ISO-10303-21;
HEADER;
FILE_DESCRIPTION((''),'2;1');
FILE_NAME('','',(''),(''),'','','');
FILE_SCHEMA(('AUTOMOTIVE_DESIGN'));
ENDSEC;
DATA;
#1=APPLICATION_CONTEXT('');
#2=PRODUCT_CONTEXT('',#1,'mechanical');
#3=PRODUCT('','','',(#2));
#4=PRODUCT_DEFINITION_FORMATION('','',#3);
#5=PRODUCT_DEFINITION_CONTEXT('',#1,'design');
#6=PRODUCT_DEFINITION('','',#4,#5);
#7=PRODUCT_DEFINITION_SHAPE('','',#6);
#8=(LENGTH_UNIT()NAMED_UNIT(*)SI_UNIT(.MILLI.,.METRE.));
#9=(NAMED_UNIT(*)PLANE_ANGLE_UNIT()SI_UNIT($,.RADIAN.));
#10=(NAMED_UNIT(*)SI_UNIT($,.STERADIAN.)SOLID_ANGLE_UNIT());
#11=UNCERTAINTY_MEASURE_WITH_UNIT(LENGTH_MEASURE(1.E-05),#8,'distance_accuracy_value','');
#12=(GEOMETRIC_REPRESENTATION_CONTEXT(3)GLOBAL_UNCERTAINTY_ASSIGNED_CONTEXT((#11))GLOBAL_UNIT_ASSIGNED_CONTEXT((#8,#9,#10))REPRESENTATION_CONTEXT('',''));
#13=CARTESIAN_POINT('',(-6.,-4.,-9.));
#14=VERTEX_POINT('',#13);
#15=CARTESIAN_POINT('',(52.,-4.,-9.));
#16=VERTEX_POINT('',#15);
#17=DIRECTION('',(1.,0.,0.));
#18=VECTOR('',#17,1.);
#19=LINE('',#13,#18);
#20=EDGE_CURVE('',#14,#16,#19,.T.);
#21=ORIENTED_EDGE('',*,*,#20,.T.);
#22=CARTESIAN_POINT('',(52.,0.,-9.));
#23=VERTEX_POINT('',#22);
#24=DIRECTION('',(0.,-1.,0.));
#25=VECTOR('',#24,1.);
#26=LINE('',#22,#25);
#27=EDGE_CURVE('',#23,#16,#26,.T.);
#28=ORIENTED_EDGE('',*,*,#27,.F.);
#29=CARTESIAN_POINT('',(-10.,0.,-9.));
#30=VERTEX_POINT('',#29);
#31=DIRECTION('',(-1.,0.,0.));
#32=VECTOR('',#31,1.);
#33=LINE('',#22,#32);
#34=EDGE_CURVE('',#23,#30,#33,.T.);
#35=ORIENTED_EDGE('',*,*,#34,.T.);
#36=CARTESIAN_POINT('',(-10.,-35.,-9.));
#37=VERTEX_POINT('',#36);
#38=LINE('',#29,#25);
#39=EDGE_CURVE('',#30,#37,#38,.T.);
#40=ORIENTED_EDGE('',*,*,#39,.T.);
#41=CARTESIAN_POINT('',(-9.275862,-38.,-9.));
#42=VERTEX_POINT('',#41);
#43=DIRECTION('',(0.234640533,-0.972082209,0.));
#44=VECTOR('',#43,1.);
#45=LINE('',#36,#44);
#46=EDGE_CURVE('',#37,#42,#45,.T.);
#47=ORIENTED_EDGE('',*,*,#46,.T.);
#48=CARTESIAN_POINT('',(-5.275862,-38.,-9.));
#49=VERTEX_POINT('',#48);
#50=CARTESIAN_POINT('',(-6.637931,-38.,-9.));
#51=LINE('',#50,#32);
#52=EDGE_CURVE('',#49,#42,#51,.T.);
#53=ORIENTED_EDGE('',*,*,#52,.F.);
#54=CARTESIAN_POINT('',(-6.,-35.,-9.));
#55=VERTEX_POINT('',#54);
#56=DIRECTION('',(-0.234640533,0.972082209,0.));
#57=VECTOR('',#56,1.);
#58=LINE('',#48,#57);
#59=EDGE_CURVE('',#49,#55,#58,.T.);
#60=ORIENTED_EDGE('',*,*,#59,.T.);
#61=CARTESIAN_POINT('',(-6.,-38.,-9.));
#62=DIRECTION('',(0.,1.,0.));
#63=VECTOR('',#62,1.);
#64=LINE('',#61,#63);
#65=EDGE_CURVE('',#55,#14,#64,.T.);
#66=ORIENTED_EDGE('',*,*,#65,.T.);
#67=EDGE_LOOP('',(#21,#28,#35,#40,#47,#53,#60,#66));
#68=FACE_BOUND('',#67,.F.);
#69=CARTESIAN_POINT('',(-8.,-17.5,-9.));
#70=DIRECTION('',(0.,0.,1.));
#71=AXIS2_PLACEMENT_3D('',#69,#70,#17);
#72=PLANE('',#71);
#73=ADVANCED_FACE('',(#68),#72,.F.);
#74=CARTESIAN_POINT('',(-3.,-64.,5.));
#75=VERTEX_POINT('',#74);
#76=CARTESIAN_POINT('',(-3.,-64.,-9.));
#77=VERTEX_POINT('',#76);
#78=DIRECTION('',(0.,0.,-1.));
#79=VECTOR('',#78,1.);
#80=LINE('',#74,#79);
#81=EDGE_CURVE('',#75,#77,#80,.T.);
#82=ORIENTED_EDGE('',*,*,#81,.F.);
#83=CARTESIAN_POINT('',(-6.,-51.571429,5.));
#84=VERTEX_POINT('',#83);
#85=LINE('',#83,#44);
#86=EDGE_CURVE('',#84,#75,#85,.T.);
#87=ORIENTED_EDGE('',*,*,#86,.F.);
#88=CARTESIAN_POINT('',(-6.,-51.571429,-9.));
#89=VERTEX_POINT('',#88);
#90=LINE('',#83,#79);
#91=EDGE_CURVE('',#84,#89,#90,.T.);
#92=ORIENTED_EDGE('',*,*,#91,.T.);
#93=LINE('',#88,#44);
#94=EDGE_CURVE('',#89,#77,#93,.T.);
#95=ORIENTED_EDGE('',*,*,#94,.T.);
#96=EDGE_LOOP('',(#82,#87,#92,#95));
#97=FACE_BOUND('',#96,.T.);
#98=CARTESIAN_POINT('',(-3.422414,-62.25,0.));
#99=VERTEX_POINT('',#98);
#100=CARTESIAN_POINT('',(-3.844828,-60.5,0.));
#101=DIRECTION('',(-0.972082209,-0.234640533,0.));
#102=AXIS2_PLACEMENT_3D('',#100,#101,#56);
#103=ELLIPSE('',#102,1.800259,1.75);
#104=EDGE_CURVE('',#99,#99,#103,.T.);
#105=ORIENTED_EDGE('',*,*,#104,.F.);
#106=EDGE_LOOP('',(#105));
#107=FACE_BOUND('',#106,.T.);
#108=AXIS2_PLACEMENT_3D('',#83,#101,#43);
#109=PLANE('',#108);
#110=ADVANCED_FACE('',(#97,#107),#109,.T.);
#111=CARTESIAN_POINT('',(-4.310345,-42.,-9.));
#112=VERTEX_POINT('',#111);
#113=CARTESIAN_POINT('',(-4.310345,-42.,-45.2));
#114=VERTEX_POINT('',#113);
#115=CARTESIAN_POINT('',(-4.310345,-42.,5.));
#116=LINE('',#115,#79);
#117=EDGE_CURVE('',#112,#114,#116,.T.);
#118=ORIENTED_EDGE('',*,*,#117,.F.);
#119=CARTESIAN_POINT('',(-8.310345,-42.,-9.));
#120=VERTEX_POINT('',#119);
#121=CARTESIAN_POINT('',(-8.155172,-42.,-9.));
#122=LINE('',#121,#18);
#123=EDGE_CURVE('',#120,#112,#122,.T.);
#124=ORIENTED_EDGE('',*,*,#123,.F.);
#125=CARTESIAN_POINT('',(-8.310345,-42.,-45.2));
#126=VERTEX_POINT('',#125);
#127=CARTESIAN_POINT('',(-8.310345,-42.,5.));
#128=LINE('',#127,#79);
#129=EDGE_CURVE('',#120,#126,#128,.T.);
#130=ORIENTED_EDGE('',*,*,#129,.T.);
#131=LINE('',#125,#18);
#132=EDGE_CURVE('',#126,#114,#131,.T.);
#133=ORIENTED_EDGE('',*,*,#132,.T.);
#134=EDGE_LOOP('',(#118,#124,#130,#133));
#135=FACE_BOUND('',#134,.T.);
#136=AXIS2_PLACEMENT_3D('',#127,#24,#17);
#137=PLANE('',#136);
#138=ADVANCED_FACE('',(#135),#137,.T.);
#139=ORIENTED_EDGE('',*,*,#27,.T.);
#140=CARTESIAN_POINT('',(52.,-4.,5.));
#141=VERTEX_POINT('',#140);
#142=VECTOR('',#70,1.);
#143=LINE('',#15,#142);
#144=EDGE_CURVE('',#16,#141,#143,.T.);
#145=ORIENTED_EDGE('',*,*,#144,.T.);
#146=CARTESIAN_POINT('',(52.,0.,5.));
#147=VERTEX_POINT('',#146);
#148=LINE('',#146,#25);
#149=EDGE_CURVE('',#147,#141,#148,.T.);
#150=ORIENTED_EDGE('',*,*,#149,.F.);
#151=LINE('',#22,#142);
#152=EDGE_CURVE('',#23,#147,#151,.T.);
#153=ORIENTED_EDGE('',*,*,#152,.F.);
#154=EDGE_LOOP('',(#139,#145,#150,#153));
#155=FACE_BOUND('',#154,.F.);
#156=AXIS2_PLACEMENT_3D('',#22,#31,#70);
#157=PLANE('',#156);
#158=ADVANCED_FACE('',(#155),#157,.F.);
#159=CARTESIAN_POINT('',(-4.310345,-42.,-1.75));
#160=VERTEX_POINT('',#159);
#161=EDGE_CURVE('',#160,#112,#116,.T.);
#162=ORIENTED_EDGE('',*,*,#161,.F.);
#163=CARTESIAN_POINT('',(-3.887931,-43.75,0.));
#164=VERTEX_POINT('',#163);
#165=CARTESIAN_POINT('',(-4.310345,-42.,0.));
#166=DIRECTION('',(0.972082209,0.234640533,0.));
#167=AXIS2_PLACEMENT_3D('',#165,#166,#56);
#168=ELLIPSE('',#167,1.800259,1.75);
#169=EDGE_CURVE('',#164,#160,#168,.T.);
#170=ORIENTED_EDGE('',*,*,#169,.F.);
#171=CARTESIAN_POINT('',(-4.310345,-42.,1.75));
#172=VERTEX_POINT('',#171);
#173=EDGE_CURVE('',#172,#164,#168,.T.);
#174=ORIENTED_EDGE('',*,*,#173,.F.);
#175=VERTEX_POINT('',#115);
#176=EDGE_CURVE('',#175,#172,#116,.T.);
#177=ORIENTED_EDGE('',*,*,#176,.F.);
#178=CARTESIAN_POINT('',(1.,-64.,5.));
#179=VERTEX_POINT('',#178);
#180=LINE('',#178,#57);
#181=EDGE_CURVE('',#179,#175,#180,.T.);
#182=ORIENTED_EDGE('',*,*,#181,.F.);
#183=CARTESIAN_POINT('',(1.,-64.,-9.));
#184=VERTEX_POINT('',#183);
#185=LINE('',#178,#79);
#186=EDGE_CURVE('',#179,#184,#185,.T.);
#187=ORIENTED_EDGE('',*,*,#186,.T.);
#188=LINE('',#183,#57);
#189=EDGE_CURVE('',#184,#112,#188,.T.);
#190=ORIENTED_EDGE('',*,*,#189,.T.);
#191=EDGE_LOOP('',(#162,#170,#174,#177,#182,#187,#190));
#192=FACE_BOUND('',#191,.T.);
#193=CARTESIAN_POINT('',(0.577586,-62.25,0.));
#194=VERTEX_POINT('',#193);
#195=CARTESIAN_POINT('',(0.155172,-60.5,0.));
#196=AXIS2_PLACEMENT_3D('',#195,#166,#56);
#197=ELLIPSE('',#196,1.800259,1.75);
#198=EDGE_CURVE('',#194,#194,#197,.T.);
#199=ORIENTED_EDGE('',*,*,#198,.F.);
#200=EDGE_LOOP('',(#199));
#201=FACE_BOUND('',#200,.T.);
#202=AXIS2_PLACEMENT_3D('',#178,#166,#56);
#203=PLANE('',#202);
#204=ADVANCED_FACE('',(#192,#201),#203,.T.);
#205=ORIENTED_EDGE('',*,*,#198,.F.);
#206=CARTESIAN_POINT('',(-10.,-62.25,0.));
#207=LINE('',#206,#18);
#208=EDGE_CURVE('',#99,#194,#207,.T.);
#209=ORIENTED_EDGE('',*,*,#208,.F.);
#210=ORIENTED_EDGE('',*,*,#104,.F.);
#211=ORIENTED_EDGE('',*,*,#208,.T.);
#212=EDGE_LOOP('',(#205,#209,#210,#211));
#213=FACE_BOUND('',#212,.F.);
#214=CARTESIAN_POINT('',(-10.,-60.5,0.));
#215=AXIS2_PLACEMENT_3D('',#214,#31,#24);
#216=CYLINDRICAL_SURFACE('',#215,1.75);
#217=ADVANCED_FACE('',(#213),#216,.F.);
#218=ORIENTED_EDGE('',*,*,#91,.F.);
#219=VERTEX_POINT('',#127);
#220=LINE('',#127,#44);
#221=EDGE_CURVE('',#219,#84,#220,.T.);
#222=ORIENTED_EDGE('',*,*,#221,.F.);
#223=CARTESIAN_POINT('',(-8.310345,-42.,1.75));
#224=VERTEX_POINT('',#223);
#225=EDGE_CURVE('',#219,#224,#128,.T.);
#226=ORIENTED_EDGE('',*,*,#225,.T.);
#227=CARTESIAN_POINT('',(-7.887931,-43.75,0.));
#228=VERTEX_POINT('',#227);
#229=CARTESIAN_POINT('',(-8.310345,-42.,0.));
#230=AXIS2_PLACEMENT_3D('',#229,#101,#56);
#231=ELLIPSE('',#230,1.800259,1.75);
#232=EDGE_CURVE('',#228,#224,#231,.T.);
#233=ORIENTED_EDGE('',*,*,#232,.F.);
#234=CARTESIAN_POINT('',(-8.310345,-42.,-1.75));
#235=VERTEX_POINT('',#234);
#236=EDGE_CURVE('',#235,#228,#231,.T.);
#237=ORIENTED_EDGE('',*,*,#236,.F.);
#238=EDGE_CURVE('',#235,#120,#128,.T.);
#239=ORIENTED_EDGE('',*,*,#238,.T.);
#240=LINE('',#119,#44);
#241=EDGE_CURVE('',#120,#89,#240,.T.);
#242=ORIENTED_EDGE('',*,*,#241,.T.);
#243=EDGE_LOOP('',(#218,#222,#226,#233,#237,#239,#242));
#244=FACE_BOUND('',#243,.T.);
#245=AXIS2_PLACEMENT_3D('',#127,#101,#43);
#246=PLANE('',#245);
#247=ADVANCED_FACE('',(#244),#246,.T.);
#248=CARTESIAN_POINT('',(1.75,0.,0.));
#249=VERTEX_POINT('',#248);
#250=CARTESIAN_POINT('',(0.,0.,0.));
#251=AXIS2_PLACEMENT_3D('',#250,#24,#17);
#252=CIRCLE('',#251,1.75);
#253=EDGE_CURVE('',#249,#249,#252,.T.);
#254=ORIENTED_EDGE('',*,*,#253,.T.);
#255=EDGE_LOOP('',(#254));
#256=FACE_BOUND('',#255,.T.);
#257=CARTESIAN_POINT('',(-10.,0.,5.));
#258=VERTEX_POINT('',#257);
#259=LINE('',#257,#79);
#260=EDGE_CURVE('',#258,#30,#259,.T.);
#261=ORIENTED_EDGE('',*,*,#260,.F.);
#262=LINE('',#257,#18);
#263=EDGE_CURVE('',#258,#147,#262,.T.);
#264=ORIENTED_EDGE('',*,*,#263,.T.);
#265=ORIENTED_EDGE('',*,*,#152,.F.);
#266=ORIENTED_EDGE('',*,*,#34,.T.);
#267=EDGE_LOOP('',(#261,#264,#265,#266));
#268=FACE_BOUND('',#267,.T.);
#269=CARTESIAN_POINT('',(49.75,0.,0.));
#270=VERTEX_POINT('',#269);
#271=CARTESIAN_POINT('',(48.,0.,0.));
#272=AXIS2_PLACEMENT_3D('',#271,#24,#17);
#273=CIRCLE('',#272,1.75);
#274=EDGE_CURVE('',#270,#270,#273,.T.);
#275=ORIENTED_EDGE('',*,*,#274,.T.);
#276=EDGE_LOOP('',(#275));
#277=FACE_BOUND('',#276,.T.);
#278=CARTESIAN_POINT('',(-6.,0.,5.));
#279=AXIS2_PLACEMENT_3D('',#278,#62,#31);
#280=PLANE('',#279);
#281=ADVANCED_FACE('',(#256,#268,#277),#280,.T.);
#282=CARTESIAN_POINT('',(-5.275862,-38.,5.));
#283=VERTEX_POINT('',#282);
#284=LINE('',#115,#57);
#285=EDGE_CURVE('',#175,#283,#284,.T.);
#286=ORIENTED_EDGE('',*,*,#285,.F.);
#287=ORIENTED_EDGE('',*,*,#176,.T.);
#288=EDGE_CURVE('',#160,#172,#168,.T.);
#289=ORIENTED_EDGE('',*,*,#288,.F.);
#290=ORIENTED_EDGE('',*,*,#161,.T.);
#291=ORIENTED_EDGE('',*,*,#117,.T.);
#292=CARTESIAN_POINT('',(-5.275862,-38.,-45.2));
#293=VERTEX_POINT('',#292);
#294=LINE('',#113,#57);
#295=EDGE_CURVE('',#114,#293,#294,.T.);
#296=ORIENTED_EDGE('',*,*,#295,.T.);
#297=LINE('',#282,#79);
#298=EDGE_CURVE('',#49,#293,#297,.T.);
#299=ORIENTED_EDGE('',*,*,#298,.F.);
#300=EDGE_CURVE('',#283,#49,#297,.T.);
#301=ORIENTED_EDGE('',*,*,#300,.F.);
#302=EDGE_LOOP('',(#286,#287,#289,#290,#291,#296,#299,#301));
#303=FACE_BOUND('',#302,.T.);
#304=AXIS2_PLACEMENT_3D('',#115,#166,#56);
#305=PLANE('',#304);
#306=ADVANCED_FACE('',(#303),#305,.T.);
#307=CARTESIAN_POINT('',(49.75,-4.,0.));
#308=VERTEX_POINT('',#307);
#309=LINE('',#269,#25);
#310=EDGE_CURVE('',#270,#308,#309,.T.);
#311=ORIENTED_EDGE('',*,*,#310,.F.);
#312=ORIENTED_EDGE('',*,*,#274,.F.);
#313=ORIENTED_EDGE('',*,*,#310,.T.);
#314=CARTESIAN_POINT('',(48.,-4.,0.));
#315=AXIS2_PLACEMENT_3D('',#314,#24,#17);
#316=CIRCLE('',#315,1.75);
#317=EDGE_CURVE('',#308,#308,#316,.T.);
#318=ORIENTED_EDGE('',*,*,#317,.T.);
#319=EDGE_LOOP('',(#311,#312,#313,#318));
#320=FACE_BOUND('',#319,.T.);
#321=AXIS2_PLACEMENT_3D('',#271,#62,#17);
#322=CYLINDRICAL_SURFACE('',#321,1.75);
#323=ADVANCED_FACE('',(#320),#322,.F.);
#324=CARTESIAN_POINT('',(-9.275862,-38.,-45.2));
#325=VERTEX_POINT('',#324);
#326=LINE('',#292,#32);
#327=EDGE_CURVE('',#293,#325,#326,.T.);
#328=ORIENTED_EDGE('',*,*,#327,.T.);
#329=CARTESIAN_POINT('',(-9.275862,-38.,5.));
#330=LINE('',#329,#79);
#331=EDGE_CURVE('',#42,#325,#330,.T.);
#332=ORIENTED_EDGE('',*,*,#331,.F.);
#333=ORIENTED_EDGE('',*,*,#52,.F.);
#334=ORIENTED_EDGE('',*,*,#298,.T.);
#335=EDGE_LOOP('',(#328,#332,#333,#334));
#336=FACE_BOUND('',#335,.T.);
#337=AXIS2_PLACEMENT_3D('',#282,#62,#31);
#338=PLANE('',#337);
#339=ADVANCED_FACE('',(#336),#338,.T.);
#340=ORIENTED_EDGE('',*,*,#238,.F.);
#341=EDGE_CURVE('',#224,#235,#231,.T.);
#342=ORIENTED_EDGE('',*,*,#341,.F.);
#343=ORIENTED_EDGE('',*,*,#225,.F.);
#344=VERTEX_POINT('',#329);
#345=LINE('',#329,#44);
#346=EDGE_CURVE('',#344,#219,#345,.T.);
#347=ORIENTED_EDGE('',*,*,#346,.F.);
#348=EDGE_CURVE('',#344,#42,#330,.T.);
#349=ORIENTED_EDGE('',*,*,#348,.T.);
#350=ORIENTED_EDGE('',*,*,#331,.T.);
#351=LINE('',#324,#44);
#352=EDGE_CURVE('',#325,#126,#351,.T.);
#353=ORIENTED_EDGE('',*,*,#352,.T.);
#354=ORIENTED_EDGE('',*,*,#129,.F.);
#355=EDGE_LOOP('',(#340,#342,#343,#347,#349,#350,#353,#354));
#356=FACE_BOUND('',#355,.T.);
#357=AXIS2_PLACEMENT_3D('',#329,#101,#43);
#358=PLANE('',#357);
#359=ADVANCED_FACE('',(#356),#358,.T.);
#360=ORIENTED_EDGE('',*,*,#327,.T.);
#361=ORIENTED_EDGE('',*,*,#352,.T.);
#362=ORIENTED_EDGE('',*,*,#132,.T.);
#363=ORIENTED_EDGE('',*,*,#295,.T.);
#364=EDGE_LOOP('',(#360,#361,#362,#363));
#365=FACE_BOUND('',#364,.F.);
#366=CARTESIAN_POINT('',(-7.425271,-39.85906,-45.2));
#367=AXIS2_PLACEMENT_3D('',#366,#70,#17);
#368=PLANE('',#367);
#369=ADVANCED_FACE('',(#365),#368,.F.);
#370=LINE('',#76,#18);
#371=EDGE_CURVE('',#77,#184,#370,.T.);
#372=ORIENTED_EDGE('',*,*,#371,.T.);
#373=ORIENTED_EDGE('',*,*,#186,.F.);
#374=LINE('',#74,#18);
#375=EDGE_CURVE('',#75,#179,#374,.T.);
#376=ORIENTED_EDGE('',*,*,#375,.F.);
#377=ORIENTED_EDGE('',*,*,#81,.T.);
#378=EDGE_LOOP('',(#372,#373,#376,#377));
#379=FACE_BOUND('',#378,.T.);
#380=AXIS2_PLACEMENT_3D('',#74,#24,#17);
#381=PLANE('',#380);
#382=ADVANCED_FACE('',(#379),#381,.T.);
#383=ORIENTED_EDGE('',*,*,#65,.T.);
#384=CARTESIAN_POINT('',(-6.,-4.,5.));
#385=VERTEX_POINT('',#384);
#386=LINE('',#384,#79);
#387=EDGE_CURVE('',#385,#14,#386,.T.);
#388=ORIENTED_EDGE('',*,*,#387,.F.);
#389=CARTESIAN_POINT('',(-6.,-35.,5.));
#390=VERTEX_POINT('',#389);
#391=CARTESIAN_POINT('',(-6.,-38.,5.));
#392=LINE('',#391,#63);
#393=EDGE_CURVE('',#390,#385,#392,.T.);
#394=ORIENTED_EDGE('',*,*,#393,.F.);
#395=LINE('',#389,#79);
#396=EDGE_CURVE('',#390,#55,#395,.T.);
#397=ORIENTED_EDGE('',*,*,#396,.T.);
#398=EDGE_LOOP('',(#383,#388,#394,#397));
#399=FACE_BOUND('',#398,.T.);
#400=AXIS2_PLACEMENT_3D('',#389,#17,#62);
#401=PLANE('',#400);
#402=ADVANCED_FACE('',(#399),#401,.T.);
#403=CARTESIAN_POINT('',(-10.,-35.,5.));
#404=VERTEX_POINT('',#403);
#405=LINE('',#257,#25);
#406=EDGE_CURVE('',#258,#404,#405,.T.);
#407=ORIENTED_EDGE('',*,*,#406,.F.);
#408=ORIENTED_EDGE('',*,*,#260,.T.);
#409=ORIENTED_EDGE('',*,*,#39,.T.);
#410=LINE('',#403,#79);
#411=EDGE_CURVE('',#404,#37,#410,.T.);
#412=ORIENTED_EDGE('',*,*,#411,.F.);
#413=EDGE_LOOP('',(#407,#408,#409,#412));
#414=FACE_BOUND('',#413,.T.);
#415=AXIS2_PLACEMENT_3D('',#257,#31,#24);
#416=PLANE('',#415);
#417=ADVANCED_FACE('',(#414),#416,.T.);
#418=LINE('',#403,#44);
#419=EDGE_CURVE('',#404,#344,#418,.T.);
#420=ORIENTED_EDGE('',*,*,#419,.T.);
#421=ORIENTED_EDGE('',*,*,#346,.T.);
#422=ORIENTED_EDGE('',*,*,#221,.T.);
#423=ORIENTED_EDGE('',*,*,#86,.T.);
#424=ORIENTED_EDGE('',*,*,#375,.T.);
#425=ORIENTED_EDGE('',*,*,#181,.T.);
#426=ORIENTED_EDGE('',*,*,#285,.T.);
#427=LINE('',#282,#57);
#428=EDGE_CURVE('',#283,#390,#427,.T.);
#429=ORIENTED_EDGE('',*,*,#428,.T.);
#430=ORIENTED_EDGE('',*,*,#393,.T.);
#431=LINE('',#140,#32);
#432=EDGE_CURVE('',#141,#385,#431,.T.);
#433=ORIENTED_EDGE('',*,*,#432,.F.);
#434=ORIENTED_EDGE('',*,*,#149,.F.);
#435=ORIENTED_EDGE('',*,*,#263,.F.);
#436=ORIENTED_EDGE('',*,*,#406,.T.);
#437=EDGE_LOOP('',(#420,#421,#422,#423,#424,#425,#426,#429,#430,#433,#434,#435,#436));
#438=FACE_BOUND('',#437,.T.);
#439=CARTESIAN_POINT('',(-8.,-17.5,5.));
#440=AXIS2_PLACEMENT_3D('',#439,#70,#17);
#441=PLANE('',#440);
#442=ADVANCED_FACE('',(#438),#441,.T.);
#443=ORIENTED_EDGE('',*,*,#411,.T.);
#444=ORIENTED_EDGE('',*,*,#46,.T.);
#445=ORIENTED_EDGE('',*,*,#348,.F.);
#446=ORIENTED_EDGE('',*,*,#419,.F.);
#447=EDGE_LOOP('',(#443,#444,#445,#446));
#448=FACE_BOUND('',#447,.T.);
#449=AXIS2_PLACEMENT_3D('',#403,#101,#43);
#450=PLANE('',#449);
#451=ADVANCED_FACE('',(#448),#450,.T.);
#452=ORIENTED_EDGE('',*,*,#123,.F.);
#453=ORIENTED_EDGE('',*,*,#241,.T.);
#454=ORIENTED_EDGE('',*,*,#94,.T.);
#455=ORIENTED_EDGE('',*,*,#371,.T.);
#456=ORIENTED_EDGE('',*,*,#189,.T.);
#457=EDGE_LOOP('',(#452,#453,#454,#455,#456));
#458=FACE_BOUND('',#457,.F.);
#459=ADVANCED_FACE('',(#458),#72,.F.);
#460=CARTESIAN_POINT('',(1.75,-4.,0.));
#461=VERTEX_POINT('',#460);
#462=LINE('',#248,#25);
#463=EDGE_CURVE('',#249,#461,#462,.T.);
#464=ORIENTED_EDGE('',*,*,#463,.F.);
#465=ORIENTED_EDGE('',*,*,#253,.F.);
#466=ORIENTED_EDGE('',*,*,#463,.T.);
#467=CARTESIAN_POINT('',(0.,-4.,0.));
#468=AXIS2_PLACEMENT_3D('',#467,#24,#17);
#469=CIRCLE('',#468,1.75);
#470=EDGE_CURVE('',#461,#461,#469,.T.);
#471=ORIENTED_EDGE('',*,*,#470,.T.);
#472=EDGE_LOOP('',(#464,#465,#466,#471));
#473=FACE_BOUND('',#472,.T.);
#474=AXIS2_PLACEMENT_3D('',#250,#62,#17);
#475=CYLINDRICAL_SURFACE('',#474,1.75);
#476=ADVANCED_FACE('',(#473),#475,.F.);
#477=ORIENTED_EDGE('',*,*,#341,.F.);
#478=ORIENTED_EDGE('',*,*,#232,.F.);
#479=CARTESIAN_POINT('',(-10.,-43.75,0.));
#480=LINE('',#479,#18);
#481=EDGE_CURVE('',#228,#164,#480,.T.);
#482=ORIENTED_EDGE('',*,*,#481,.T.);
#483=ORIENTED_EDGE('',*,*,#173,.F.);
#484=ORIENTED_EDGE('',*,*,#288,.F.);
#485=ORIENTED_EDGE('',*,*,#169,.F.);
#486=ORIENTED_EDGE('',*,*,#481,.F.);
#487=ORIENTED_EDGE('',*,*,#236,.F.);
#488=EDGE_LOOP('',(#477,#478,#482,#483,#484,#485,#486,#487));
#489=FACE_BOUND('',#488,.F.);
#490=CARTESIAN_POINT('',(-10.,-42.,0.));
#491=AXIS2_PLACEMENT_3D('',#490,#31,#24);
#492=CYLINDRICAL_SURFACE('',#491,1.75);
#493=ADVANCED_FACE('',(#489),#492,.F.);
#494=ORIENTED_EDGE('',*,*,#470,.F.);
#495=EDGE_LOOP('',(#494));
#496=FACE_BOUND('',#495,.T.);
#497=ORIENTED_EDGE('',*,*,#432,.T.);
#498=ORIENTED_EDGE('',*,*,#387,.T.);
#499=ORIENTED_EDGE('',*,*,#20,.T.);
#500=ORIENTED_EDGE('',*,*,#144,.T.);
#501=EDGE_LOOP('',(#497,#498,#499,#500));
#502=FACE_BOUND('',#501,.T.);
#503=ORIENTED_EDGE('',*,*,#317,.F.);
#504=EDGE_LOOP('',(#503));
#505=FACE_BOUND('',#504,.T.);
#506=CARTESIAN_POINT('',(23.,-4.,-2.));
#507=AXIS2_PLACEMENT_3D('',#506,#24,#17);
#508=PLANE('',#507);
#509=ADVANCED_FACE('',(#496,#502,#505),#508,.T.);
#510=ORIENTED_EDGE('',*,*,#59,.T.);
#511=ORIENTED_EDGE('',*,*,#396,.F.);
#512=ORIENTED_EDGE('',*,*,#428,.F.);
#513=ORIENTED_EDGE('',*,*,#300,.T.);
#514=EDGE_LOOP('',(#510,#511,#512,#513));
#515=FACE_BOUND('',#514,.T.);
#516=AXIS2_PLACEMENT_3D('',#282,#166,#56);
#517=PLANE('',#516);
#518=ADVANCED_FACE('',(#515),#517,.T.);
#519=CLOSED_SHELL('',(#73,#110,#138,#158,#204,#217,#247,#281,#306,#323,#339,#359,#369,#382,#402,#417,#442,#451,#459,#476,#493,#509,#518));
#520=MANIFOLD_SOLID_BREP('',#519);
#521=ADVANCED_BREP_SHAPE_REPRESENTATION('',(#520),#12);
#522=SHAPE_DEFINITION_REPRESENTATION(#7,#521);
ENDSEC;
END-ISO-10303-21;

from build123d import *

# Parameters (mm, degrees)
F0_R     = 1.75
F1_DEPTH = 4
F4_DEPTH = 14
F6_DEPTH = 50.2
F5_R     = 1.75
F7_DEPTH = 71


# Not quite as in the source:
# - a feature names something its author has since deleted; it is built from what else it names


with BuildPart() as f1:
    # F0 (on Front) → F1 (new body)
    with BuildSketch(Plane.XZ):
        Polygon((-6, 5), (-6, 0), (-6, -9), (52, -9), (52, 0), (52, 5), align=None)
        Circle(F0_R, mode=Mode.SUBTRACT)
        with Locations((48, 0)):
            Circle(F0_R, mode=Mode.SUBTRACT)
    extrude(amount=F1_DEPTH)

    # F3 (on face) → F4 (join)
    with BuildSketch(Plane.XY.offset(5)):
        Polygon((-10, 0), (-10, -35), (-6, -35), (-6, -4), (-6, 0), align=None)
        Polygon((-6, -35), (-10, -35), (-9.275862069, -38), (-6, -38), align=None)
        Polygon((-5.275862069, -38), (-6, -35), (-6, -38), align=None)
        Polygon((-6, -38), (-9.275862069, -38), (-8.3103448276, -42), (-6, -42), align=None)
        Polygon((-4.3103448276, -42), (-5.275862069, -38), (-6, -38), (-6, -42), align=None)
        Polygon((-6, -42), (-8.3103448276, -42), (-6, -51.5714285714), align=None)
        Polygon((1, -64), (-4.3103448276, -42), (-6, -42), (-6, -51.5714285714), (-3, -64), align=None)
    extrude(amount=-F4_DEPTH)

    # F3 (on face) → F6 (join)
    with BuildSketch(Plane.XY.offset(5)):
        Polygon((-6, -38), (-9.275862069, -38), (-8.3103448276, -42), (-6, -42), align=None)
        Polygon((-4.3103448276, -42), (-5.275862069, -38), (-6, -38), (-6, -42), align=None)
    extrude(amount=-F6_DEPTH)

    # F5 (on face) → F7 (cut)
    with BuildSketch(Plane(origin=(-10, 0, 0), x_dir=(0, -1, 0), z_dir=(-1, 0, 0))):
        with Locations((42, 0)):
            Circle(F5_R)
        with Locations((60.5, 0)):
            Circle(F5_R)
    extrude(amount=-F7_DEPTH, mode=Mode.SUBTRACT)


solid = f1.part
